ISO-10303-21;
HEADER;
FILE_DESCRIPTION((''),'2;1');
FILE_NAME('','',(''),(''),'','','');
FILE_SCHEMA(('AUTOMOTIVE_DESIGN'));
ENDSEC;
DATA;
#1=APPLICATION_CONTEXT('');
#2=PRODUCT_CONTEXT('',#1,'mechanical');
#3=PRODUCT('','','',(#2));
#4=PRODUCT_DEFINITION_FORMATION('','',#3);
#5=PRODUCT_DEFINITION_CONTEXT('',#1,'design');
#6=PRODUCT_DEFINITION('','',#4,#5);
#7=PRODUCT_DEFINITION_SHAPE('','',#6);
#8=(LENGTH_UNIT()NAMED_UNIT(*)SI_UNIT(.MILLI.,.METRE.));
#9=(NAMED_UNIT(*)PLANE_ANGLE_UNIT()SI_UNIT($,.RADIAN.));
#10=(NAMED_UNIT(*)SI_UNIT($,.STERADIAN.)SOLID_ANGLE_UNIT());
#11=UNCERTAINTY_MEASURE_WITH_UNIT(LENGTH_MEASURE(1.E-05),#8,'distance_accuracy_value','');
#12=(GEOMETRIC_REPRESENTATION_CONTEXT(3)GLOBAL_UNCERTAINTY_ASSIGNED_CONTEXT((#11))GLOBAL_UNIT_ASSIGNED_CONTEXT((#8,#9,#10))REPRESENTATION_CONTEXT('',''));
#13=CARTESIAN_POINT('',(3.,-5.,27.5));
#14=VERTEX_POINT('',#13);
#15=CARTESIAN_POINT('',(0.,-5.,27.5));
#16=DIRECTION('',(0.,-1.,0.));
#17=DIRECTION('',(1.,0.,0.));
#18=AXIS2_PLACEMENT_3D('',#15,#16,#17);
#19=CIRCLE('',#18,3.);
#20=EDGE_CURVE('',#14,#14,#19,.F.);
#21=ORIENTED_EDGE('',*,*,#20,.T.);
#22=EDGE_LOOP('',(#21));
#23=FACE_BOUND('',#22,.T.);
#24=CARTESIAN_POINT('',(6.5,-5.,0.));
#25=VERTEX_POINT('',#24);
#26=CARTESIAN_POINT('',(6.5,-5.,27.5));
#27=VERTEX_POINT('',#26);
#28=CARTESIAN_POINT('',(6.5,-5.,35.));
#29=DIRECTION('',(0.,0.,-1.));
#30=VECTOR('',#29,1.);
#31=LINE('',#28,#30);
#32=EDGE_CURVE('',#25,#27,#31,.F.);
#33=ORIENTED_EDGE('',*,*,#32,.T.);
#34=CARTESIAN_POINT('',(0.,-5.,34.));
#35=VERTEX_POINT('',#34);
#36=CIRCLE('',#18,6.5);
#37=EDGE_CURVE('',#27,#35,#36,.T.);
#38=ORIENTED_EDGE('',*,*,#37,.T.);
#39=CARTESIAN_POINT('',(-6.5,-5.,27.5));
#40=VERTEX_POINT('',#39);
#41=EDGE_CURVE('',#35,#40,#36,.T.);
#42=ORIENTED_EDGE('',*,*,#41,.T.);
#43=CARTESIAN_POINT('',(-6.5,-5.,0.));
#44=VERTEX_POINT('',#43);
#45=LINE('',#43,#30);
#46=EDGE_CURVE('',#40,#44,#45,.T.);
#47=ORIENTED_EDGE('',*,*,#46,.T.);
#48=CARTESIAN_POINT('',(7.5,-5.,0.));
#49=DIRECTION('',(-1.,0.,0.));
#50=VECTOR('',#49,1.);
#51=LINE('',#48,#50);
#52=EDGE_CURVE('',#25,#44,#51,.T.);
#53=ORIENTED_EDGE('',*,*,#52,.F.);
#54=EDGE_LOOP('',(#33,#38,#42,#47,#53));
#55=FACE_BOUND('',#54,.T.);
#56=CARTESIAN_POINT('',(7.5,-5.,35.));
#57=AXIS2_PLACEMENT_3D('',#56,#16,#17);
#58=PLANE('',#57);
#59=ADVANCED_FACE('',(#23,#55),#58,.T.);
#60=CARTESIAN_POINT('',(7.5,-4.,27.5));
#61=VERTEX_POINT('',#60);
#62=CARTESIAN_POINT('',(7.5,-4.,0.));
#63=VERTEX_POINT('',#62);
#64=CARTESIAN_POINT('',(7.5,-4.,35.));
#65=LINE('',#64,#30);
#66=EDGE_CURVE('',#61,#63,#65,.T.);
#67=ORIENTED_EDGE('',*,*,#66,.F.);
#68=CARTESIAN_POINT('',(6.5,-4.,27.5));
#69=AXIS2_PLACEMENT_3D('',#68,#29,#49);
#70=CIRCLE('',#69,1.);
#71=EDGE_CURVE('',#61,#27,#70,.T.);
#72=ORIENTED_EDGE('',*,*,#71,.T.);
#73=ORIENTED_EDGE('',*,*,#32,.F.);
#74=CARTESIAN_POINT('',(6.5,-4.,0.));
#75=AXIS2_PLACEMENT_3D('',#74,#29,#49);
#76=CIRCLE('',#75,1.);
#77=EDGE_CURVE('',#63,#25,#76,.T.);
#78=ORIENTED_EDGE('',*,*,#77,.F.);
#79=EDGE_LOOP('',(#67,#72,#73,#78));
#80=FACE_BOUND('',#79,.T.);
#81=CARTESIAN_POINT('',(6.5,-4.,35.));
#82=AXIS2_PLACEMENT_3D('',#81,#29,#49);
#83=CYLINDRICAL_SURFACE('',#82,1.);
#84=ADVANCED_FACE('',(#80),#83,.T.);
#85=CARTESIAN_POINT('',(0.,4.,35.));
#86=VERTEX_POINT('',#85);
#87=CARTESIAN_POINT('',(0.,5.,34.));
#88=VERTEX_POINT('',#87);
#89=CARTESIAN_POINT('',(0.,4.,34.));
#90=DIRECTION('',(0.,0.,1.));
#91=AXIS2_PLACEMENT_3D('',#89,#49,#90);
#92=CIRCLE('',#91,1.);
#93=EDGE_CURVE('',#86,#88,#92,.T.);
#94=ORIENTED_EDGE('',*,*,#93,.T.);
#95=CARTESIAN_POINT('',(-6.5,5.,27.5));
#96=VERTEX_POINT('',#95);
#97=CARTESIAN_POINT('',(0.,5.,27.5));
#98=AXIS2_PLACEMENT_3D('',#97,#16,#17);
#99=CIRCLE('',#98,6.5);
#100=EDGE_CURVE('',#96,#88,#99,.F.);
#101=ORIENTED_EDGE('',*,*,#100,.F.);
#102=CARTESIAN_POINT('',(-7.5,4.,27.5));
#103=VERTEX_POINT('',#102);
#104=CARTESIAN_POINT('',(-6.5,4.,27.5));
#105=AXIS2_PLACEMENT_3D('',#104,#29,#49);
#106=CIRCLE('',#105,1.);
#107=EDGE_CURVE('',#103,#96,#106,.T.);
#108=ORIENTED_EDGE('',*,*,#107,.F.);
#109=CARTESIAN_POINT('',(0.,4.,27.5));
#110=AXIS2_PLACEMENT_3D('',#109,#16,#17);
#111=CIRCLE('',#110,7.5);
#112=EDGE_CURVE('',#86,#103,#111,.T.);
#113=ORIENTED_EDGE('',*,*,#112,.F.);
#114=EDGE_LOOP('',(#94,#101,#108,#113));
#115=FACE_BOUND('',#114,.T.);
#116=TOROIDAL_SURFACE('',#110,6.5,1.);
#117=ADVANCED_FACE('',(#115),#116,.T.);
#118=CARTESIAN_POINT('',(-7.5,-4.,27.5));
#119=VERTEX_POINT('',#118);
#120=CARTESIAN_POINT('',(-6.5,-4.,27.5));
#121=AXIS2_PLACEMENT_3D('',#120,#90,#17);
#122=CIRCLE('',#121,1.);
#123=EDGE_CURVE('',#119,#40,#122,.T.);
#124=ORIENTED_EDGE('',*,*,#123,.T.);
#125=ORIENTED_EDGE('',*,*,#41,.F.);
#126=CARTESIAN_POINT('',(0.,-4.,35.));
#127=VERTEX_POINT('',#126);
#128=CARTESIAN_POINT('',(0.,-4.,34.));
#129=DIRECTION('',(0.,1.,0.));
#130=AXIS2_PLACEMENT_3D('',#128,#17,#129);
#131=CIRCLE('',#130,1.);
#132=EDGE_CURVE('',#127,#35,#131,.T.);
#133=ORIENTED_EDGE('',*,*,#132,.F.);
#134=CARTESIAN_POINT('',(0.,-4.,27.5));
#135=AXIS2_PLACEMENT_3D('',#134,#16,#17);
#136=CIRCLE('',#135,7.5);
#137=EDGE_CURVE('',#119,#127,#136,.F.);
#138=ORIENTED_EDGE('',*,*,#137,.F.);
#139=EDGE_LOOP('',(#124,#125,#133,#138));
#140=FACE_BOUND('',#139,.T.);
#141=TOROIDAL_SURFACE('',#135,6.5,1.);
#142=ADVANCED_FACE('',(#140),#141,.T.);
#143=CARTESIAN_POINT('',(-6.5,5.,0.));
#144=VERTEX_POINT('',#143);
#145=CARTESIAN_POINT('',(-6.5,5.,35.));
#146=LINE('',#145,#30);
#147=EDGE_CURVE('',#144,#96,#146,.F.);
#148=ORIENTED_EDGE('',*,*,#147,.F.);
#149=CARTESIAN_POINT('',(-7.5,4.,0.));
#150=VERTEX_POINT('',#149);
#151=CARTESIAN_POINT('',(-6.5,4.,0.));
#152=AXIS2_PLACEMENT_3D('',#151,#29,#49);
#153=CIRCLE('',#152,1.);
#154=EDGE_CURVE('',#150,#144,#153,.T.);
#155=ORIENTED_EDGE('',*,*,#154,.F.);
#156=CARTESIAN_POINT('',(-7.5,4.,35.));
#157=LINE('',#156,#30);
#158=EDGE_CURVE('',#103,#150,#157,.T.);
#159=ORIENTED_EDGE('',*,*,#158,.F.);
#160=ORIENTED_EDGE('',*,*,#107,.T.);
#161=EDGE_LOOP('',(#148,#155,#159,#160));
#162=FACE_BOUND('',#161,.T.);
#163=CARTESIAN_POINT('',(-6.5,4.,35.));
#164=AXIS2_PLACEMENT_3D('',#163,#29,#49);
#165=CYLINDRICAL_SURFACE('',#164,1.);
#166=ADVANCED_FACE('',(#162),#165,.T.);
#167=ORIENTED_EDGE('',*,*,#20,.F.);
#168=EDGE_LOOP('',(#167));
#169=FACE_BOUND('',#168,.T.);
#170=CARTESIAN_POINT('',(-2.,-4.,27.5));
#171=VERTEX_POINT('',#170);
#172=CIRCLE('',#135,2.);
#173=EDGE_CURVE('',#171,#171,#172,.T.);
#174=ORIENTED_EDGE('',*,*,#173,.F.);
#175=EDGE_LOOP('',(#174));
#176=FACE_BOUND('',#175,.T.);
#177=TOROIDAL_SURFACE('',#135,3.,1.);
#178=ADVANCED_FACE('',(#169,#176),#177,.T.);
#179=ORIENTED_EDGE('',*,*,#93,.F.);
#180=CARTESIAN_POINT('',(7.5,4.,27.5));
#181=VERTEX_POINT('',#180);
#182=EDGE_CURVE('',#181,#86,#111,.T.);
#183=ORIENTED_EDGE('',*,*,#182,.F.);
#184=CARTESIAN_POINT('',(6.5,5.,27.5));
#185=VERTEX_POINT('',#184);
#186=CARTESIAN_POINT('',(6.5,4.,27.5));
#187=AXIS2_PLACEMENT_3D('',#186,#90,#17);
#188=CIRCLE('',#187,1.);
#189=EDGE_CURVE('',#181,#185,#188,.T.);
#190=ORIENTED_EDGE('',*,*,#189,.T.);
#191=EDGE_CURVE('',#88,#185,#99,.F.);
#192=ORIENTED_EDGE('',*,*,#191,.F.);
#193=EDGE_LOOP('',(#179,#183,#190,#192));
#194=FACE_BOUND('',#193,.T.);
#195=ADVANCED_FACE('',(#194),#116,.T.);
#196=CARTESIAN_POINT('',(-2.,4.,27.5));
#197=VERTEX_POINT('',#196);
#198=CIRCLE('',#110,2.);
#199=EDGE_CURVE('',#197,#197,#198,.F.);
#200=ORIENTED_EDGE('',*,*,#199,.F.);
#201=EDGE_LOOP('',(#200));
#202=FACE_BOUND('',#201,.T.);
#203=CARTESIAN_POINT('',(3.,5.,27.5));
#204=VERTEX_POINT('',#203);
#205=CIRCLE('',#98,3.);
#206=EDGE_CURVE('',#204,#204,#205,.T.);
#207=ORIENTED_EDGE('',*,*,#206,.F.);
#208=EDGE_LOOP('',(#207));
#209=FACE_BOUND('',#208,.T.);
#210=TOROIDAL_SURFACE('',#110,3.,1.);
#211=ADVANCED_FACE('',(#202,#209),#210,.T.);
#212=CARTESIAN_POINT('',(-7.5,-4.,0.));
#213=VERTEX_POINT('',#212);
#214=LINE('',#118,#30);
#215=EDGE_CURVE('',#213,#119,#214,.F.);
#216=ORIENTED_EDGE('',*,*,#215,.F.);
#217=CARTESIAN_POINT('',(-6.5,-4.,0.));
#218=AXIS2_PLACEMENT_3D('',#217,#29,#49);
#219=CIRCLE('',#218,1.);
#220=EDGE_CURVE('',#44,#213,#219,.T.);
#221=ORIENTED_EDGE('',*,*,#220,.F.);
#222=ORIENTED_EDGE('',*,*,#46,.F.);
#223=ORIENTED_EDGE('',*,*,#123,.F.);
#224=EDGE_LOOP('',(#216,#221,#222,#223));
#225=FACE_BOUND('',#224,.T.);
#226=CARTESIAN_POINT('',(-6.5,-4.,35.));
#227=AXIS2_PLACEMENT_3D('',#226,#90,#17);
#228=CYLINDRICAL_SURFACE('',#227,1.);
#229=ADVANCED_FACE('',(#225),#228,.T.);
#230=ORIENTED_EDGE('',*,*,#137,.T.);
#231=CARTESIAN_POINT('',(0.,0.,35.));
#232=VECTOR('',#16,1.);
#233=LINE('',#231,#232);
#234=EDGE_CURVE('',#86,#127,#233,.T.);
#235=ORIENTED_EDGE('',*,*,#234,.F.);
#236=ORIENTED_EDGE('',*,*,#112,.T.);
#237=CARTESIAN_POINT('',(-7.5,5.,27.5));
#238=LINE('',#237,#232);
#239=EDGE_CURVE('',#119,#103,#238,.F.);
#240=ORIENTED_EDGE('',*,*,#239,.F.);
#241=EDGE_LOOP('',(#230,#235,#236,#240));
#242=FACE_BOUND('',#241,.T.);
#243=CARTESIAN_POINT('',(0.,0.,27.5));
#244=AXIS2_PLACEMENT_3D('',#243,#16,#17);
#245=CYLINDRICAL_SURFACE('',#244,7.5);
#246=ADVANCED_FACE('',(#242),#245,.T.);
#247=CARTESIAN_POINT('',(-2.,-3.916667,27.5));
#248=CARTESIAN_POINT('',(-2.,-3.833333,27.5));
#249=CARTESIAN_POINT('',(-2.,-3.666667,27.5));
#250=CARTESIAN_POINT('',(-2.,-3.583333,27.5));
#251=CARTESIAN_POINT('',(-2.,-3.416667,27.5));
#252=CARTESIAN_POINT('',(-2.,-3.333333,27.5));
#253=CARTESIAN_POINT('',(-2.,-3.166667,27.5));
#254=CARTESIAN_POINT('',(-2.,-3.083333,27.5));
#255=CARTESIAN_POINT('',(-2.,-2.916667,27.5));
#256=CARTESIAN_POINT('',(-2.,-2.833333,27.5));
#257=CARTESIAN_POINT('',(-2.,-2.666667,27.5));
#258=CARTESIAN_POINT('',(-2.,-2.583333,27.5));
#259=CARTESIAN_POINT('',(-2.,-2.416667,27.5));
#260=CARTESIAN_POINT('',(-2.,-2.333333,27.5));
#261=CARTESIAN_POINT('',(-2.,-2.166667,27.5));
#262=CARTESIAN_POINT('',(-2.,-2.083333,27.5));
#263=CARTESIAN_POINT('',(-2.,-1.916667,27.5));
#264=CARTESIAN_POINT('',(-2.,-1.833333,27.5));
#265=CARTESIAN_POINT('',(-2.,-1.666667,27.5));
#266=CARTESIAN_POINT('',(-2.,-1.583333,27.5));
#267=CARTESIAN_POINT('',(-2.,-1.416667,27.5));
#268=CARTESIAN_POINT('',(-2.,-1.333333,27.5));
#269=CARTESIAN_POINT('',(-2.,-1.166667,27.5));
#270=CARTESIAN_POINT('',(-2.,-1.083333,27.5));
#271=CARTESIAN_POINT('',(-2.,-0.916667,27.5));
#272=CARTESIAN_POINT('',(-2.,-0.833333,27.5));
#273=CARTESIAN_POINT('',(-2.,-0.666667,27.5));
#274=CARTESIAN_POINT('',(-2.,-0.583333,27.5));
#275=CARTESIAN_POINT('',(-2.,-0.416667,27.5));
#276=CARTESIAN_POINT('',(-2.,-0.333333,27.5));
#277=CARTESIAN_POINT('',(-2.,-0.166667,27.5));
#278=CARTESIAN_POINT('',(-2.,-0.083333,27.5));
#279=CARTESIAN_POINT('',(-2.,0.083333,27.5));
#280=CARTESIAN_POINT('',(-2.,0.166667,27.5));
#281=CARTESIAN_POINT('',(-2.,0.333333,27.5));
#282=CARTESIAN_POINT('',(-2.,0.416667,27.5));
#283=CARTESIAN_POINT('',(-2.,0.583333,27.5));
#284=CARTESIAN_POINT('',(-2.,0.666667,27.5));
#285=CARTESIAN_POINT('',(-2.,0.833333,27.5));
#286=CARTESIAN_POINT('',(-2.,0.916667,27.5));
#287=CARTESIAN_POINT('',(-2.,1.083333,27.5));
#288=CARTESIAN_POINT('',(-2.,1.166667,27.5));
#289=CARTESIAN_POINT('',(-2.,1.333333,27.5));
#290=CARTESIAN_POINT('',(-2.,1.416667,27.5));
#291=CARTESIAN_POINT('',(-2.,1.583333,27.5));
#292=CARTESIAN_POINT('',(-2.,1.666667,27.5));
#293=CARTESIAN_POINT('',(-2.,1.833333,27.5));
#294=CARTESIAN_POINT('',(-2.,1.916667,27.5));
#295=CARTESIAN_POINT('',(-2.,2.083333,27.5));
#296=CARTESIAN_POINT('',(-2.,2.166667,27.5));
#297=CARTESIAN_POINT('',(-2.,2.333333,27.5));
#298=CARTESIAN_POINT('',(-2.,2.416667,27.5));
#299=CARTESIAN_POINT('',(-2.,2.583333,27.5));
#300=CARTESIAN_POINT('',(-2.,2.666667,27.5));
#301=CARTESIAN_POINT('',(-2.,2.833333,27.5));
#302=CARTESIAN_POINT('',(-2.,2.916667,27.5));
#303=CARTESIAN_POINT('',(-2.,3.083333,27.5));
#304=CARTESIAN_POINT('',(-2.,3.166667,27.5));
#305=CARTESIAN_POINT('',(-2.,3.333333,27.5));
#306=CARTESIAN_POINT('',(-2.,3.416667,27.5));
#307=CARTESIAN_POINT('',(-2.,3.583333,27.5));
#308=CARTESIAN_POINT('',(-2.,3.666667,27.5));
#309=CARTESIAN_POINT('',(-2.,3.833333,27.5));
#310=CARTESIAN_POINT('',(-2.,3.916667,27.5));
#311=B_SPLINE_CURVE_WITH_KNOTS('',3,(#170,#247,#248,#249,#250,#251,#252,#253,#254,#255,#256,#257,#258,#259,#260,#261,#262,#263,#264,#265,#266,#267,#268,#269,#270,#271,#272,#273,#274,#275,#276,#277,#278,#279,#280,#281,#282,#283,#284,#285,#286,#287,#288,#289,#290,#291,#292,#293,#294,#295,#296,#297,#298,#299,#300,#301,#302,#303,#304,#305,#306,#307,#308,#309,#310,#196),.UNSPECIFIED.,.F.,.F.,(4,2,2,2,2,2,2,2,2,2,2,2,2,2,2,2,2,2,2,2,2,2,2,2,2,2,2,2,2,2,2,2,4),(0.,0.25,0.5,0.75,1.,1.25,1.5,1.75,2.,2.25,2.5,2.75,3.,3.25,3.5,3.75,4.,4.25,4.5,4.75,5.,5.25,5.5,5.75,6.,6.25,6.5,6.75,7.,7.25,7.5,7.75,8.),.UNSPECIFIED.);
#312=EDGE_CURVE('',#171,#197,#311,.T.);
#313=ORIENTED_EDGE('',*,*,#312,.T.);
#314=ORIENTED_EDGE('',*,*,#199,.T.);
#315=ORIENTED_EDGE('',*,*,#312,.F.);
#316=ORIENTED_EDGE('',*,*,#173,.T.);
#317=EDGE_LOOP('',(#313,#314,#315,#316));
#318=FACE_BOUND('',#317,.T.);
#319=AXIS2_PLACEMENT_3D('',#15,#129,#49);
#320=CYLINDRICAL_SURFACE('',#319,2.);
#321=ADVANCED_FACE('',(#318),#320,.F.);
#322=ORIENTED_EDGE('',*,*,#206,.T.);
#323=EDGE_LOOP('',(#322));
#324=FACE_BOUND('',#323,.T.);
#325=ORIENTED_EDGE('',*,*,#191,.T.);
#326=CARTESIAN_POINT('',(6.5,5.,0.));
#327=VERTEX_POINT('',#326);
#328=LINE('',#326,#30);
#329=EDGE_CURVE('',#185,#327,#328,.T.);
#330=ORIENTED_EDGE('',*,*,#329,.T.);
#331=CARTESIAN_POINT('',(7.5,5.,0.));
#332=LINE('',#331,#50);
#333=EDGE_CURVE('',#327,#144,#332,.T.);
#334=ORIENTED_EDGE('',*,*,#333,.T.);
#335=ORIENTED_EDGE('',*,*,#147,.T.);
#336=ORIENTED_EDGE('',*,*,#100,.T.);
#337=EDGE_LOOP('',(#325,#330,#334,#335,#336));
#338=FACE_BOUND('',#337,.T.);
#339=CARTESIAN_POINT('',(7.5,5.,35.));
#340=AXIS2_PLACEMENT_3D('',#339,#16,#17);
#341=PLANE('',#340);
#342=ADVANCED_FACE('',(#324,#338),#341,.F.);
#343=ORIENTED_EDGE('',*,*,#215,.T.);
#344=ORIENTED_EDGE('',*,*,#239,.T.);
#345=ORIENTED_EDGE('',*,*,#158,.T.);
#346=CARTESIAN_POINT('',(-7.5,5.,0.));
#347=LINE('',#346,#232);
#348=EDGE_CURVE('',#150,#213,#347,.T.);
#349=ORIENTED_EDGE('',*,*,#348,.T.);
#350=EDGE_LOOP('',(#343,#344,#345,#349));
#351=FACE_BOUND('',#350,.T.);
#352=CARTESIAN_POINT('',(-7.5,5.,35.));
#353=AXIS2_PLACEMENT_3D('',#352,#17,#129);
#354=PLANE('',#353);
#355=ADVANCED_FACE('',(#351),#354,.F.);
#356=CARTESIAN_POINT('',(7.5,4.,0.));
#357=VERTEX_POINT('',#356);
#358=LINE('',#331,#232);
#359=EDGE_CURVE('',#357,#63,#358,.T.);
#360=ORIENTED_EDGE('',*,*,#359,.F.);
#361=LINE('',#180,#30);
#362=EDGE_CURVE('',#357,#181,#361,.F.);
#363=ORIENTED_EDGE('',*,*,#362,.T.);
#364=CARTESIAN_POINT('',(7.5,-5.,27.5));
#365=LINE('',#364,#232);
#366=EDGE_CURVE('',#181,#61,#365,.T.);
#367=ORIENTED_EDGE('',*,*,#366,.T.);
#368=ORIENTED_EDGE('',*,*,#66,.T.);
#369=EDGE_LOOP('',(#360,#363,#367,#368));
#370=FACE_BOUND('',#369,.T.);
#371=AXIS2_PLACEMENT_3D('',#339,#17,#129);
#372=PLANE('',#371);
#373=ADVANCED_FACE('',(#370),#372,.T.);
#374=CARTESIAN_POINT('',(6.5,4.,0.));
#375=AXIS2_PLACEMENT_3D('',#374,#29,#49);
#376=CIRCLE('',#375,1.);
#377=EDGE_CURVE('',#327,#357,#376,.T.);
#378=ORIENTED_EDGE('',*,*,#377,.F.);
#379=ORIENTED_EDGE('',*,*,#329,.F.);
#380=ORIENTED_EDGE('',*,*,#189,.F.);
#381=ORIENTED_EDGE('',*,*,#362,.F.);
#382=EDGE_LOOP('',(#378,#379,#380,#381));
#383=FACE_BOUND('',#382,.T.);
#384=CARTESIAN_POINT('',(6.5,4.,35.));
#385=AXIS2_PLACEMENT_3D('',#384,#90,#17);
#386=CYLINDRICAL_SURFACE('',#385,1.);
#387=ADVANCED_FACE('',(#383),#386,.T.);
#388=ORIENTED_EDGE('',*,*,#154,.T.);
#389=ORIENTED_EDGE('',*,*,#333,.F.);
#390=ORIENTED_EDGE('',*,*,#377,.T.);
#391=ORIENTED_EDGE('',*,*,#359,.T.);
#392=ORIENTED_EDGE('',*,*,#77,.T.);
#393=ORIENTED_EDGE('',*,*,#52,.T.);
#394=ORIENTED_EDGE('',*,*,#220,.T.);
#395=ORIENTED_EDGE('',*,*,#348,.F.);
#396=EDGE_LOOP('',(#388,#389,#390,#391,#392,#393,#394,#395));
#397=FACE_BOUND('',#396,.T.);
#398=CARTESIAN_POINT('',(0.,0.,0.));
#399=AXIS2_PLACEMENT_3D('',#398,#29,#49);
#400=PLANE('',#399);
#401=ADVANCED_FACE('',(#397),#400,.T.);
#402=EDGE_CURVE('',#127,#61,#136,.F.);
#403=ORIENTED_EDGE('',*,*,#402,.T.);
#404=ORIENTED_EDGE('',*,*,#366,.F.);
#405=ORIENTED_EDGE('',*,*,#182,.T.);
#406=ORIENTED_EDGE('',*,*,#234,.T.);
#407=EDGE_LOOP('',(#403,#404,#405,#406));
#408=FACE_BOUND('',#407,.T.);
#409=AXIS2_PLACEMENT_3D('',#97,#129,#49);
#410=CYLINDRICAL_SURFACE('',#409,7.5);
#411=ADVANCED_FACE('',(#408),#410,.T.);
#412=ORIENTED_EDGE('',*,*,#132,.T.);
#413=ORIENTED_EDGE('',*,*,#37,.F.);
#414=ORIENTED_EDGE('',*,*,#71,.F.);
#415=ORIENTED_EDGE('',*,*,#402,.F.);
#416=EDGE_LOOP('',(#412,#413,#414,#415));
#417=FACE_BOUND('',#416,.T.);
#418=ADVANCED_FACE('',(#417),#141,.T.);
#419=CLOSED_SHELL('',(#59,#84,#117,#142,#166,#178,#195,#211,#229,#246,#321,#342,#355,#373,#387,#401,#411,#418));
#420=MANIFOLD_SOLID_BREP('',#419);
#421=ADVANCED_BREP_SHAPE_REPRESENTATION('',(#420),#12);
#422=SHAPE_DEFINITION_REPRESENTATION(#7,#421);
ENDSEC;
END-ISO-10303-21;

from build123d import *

# Parameters (mm, degrees)
SKETCH1_W               = 15
SKETCH1_H               = 10
BOSS_EXTRUDE1_DEPTH     = 35
FILLET1_R               = 7.5
CUT_EXTRUDE1_DEPTH      = 38.165171868
CUT_EXTRUDE1_DEPTH_BACK = 38.165171868
SKETCH2_R               = 2
FILLET2_R               = 1


with BuildPart() as part:
    # Sketch1 → Boss-Extrude1 (new body)
    with BuildSketch(Plane.XY):
        Rectangle(SKETCH1_W, SKETCH1_H)
    extrude(amount=BOSS_EXTRUDE1_DEPTH)

    # Fillet1
    fillet1_edges = [part.edges().sort_by_distance(p)[0] for p in [
        (7.5, 0, 35),
        (-7.5, 0, 35),
    ]]
    fillet(fillet1_edges, radius=FILLET1_R - 0.0001)  # a hair under: the kernel refuses the full size

    # Sketch2 → Cut-Extrude1 (cut, two sides: drawn at the far end of the back side and taken through both)
    with BuildSketch(Plane(origin=(0, 5, 0), x_dir=(1, 0, 0), z_dir=(0, 1, 0)).offset(-CUT_EXTRUDE1_DEPTH_BACK)):
        with Locations(Location((0, -27.5, 0), (0, 0, 180))):
            Circle(SKETCH2_R)
    extrude(amount=CUT_EXTRUDE1_DEPTH + CUT_EXTRUDE1_DEPTH_BACK, mode=Mode.SUBTRACT)

    # Fillet2
    fillet2_edges = [part.edges().sort_by_distance(p)[0] for p in [
        (7.5, 5, 13.75005),
        (7.5, -5, 13.75005),
        (-7.5, -5, 13.75005),
        (-5.303330148, -5, 32.803330148),
        (5.303330148, -5, 32.803330148),
        (-7.5, 5, 13.75005),
        (-5.303330148, 5, 32.803330148),
        (5.303330148, 5, 32.803330148),
        (2, -5, 27.5),
        (2, 5, 27.5),
    ]]
    fillet(fillet2_edges, radius=FILLET2_R)


solid = part.part
